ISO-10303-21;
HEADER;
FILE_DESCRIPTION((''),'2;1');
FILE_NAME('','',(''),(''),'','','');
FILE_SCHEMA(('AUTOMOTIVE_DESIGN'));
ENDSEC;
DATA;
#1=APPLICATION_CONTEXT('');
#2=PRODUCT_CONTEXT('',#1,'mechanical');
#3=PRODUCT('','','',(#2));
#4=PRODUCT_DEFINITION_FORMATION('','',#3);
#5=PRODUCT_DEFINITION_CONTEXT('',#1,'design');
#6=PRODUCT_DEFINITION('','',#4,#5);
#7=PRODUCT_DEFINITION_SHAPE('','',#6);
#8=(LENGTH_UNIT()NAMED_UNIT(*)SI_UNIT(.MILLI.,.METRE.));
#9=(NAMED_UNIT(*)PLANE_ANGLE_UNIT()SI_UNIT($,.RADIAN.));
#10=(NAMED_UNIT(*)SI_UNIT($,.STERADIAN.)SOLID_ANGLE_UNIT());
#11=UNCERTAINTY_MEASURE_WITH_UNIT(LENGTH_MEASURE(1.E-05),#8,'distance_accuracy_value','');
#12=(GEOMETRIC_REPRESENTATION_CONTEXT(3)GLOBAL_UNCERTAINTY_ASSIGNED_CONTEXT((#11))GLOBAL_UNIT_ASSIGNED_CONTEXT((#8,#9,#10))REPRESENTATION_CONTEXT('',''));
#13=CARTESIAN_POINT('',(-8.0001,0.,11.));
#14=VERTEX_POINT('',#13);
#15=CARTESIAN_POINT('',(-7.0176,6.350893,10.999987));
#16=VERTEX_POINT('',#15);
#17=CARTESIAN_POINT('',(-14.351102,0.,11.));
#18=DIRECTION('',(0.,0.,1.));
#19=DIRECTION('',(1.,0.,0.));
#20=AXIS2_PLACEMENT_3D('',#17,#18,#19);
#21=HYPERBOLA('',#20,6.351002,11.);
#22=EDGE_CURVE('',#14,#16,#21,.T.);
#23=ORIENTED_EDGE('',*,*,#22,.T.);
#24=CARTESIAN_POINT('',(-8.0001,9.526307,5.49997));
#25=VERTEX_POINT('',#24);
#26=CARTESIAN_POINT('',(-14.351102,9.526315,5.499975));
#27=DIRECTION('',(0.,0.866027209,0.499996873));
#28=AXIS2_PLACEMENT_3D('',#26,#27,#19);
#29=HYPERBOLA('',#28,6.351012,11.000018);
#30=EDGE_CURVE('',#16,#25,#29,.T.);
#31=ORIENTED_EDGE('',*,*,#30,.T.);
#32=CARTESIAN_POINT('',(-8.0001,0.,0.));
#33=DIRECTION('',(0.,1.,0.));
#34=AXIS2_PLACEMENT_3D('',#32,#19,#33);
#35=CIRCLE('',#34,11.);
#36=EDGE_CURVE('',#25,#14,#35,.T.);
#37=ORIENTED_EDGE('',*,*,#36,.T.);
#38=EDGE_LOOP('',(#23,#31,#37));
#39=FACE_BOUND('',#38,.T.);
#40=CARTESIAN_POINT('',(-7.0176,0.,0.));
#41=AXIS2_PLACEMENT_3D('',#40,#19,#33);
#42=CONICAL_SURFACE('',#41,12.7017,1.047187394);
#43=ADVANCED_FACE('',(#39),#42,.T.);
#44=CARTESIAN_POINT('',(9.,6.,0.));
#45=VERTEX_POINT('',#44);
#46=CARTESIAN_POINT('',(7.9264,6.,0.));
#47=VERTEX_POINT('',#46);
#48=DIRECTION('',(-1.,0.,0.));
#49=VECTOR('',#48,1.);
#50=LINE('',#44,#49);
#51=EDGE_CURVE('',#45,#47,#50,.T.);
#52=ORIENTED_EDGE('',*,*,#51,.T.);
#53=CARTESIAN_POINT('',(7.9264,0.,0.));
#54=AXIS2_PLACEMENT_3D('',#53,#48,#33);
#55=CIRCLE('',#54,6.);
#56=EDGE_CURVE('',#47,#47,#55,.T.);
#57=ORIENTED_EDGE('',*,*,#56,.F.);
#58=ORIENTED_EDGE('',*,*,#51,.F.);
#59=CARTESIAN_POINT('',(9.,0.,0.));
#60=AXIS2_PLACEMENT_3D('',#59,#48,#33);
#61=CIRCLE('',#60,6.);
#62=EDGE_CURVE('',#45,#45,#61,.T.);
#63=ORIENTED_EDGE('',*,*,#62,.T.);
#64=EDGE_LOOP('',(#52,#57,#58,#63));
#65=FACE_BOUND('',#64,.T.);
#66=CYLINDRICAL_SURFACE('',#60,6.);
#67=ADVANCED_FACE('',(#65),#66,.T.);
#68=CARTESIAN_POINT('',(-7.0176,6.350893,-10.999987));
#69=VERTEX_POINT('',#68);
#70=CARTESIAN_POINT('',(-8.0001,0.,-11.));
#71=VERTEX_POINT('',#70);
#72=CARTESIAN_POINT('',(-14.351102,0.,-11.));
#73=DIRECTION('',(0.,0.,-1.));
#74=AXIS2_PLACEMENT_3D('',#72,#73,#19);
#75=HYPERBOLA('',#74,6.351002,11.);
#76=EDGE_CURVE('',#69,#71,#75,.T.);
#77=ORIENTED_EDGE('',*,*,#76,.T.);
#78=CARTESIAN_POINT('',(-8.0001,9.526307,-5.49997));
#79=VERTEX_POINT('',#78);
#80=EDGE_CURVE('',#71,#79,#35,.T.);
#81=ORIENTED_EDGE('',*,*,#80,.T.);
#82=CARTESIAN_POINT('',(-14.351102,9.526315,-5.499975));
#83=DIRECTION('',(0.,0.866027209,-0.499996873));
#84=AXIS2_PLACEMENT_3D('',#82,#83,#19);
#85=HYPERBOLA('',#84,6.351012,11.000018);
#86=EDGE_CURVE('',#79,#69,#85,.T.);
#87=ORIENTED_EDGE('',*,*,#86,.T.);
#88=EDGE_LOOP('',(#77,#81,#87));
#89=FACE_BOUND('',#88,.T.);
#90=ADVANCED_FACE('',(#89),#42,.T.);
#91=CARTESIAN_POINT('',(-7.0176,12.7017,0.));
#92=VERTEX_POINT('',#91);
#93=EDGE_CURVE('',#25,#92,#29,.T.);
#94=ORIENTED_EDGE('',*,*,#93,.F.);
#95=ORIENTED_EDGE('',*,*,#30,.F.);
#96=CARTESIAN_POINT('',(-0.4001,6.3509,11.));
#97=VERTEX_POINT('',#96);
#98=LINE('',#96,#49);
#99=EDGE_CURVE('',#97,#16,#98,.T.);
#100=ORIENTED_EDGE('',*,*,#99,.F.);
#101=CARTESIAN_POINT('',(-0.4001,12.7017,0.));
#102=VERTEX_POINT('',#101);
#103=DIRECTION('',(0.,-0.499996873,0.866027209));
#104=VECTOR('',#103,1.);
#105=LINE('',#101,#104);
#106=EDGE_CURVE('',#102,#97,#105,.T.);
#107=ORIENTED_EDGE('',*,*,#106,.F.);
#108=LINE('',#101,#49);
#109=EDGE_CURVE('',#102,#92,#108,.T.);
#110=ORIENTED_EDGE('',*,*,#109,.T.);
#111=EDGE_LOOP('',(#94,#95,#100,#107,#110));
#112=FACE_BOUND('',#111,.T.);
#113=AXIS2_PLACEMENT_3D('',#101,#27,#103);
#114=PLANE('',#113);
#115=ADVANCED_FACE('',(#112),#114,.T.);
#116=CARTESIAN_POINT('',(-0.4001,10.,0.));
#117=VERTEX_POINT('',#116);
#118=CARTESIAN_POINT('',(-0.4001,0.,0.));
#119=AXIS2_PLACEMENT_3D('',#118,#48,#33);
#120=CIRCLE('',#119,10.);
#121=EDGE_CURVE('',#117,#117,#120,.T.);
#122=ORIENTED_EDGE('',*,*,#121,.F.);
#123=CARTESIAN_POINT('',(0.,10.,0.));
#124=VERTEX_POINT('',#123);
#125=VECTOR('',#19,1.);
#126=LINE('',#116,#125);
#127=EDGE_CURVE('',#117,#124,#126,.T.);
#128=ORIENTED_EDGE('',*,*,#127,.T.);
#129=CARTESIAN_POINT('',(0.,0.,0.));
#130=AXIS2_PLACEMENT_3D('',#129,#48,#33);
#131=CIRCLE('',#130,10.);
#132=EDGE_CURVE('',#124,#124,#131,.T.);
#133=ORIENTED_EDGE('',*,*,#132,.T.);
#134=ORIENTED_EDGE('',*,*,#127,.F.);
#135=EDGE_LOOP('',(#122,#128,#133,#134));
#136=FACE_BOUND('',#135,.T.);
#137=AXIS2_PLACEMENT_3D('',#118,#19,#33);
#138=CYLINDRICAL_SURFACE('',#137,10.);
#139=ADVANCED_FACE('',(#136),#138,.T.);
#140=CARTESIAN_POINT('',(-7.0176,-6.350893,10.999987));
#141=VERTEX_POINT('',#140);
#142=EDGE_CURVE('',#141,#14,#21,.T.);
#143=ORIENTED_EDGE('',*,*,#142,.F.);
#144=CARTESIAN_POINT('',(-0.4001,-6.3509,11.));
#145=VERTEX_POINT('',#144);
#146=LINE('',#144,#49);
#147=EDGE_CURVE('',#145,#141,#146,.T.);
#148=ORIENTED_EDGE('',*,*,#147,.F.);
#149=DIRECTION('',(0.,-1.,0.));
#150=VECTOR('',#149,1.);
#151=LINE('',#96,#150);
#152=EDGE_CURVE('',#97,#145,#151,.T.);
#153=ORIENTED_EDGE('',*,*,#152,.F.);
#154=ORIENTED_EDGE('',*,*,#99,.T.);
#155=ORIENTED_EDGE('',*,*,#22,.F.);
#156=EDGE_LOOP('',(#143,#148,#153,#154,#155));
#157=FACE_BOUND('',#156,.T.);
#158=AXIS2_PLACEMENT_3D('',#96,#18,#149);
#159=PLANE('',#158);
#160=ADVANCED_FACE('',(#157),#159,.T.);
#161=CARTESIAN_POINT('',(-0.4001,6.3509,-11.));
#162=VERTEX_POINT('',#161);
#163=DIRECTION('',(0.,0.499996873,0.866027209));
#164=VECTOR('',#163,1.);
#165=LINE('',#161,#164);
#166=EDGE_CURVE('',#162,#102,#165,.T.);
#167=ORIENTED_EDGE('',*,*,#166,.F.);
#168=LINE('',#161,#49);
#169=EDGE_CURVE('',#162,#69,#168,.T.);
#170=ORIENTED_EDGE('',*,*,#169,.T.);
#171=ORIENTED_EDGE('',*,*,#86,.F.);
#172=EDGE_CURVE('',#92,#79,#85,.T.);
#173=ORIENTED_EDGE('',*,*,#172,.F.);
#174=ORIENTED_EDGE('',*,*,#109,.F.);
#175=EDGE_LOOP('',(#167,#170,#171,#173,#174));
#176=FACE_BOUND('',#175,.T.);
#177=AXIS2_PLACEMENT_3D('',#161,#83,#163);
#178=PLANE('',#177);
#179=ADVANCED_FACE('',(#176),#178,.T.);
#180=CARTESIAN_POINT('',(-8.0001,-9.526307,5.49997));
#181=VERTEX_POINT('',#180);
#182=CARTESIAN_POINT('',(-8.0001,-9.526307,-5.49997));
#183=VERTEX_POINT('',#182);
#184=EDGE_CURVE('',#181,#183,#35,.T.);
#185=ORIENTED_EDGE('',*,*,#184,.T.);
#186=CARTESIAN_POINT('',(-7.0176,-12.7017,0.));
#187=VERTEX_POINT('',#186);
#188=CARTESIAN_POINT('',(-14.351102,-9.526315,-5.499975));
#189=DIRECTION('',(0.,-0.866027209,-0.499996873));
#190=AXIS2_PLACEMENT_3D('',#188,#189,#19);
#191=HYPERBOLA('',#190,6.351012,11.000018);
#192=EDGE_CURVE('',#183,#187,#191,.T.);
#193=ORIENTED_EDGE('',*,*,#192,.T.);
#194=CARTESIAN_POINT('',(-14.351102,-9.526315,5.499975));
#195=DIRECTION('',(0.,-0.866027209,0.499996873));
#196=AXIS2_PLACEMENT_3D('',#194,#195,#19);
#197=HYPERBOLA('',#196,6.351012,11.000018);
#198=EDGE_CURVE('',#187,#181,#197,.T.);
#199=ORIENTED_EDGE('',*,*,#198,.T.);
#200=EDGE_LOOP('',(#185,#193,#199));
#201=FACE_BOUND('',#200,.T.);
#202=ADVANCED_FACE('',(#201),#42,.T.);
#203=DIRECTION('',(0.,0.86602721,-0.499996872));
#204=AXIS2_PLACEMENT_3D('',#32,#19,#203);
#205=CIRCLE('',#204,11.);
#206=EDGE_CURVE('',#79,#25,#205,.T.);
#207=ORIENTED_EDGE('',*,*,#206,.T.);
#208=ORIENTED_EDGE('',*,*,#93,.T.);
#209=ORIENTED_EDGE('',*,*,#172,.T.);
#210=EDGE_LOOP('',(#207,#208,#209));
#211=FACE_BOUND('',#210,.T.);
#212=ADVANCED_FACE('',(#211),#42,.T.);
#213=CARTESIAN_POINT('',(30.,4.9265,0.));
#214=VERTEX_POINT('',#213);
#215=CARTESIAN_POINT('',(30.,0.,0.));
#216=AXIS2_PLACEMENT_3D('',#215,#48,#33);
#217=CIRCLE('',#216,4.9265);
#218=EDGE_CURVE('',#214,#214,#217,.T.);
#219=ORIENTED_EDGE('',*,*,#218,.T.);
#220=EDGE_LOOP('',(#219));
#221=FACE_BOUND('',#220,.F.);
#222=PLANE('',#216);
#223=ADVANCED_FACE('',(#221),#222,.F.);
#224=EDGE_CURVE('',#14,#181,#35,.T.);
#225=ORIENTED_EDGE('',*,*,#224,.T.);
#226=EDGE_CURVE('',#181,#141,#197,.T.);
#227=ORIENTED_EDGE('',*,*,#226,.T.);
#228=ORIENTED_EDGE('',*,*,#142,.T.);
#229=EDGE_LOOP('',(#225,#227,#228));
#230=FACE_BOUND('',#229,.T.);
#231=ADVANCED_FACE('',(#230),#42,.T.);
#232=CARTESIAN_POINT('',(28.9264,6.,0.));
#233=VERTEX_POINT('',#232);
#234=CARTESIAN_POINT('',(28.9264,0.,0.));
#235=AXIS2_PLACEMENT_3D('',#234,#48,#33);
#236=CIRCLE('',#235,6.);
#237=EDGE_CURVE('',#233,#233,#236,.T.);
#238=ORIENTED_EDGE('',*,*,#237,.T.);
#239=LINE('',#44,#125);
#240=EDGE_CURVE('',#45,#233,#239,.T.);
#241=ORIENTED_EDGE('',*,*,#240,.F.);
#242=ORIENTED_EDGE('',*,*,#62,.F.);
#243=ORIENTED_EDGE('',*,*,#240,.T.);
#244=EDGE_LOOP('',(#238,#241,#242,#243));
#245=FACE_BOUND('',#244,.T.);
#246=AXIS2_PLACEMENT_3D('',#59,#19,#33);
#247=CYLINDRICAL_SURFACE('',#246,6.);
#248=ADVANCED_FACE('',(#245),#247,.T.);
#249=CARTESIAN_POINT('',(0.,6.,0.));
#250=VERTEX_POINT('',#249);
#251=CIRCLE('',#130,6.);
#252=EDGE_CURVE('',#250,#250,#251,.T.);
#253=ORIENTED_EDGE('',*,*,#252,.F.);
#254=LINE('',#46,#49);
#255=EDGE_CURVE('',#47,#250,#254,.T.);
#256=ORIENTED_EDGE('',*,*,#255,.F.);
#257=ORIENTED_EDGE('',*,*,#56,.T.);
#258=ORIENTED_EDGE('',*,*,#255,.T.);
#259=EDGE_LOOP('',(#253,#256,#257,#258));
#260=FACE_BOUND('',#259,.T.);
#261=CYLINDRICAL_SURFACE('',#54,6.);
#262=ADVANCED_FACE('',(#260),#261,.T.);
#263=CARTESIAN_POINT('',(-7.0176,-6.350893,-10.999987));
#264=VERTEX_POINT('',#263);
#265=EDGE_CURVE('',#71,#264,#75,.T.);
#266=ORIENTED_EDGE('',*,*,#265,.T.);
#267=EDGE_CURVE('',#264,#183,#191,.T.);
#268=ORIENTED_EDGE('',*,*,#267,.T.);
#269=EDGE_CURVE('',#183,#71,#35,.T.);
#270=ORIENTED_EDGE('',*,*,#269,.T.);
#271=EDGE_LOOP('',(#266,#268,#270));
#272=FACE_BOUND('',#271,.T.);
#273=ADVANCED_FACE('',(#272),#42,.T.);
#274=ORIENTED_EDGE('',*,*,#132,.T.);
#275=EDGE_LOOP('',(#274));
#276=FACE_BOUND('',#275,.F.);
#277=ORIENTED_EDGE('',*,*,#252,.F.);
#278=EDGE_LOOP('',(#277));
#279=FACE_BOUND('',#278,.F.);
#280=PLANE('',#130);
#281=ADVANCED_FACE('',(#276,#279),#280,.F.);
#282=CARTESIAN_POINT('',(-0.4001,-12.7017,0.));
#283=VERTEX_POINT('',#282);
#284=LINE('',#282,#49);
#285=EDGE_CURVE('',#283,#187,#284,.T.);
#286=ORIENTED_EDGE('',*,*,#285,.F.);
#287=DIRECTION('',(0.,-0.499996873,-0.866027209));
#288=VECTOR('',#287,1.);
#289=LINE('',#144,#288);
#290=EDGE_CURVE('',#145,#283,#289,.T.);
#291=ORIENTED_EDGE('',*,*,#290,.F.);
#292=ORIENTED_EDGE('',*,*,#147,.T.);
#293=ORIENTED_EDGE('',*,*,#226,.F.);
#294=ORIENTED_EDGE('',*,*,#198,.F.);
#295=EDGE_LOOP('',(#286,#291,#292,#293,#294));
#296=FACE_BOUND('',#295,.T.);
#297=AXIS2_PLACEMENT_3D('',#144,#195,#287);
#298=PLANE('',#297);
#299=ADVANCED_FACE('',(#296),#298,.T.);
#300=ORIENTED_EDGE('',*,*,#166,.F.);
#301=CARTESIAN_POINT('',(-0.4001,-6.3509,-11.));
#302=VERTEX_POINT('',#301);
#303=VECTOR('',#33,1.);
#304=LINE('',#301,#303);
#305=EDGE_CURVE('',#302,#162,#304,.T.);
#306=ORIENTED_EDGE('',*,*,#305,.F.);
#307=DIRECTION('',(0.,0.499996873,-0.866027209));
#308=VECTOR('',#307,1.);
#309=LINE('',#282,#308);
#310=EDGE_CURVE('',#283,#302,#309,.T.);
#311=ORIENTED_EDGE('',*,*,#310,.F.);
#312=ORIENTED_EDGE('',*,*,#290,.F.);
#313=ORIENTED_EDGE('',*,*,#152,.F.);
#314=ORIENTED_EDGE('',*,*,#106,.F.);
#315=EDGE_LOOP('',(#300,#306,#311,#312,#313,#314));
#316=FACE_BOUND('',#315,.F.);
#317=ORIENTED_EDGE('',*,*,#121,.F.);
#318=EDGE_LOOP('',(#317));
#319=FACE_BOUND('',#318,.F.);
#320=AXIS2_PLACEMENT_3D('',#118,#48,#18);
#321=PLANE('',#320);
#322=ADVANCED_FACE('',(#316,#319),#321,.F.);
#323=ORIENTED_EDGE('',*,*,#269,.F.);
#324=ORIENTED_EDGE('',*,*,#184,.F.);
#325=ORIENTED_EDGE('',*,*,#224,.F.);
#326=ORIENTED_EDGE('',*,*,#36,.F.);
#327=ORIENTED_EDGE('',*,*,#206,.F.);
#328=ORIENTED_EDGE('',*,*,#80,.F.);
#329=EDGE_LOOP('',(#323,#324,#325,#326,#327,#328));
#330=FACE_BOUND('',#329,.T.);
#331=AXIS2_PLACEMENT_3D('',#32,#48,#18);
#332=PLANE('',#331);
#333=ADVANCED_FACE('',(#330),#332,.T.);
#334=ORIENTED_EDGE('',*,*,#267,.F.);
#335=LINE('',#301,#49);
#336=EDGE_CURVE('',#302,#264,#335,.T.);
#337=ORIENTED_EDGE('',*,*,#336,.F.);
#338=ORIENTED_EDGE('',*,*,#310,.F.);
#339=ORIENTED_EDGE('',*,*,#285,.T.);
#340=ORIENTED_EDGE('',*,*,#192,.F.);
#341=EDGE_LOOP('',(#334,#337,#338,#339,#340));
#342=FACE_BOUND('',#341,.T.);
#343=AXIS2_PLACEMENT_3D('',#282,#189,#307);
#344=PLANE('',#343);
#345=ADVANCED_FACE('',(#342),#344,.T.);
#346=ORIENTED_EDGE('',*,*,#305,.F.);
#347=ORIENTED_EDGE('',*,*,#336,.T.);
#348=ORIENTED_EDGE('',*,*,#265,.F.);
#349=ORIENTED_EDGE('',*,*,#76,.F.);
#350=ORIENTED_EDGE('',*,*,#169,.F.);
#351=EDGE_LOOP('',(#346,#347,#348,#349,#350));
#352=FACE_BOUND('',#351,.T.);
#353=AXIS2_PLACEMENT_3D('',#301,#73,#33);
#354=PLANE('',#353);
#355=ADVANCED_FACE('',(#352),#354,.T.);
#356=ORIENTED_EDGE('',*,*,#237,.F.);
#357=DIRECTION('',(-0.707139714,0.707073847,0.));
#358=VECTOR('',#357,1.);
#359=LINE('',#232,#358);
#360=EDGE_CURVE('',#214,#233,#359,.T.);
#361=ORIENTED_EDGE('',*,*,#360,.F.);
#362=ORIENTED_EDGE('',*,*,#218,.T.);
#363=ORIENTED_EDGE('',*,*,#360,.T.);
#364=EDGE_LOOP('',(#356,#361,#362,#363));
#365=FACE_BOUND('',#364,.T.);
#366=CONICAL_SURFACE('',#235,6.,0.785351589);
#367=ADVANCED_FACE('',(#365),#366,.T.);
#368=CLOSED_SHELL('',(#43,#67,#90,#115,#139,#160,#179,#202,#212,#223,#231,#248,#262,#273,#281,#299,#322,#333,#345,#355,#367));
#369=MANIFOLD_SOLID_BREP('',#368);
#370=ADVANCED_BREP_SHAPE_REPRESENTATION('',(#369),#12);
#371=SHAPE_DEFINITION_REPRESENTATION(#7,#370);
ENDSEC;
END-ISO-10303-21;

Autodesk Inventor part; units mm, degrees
ref_plane "YZ Plane" through (0, 0, 0) normal (1, 0, 0) x (0, 1, 0)
ref_plane "XZ Plane" through (0, 0, 0) normal (0, 1, 0) x (-1, 0, 0)
sketch "Sketch1" plane through (0, 0, 0) normal (0, 0, 1) x (1, 0, 0)
  line L0 (0, 10) -> (0, 6)
  line L1 (9, 6) -> (30, 6)
  line L2 (30, 6) -> (30, 0)
  line L3 (30, 0) -> (-0.4001, 0)
  line L4 (-6.4801, 0) -> (36.08, 0) projected
  line L5 (-0.4001, 0) -> (-0.4001, 10)
  line L6 (-0.4001, 10) -> (0, 10)
  line L7 (9, 6) -> (7.9264, 6)
  line L8 (7.9264, 6) -> (0, 6)
  line L9 (0, -2) -> (0, 12) projected
  dimension "d0" = 30
  dimension "d1" = 21
  dimension "d2" = 12
  dimension "d9" = 0.4001
  dimension "d10" = 20
  dimension "d13" = 1.0736
  dimension "d14" = 12
revolve "Body" add sketch "Sketch1" angle 360 about axis through (30, 0, 0) along (-1, 0, 0)
sketch "Sketch2" plane through (-0.4001, 0, 0) normal (-1, 0, 0) x (0, 0, 1)
  line L0 (0, 12.7017) -> (11, 6.3509)
  line L1 (11, 6.3509) -> (11, -6.3509)
  line L2 (11, -6.3509) -> (0, -12.7017)
  line L3 (0, -12.7017) -> (-11, -6.3509)
  line L4 (-11, -6.3509) -> (-11, 6.3509)
  line L5 (-11, 6.3509) -> (0, 12.7017)
  point P0 (0, 0)
  point P1 (0, 0)
  dimension "d11" = 22
extrude "Head" add sketch "Sketch2" along normal blind 7.6
sketch "Sketch4" plane through (0, 0, 0) normal (0, 0, 1) x (1, 0, 0)
  line L0 (-8.0001, 11) -> (-8.0001, 12.7017)
  line L1 (-8.0001, 12.7017) -> (-7.0176, 12.7017)
  line L2 (-7.0176, 12.7017) -> (-8.0001, 11)
  line L3 (-9.5201, 0) -> (1.1199, 0) projected
  line L4 (-0.4001, 12.7017) -> (-8.0001, 12.7017) projected
  line L5 (-8.0001, 6.3509) -> (-8.0001, 12.7017) projected
  dimension "d5" = 30
  dimension "d19" = 22
revolve "Chamfer1" cut sketch "Sketch4" angle 360 about axis through (-10, 0, 0) along (1, 0, 0)
thread "Thread" size "M12x1.75" class "6g" standard "ISO Metric profile" length 21
chamfer "Chamfer2" distance 1.0735 distance2 1.0736 1 edges at (30, -6, 0) measured on face at (30, -2.3028, 0.7984)
ref_plane "Work Plane1" through (1.525, 0, 0) normal (0, 0, 1) x (1, 0, 0)
equation "\"d0\" = NLG"
equation "\"d1\" = GEL"
equation "\"d2\" = GD"
equation "\"d10\" = SD2"
equation "\"d14\" = BDM"
equation "\"d11\" = SW"
equation "\"d3\" = KOH - SD"
equation "\"d5\" = ANG1"
equation "\"d19\" = SW0"
equation "\"d15\" = GEL"
equation "\"d6\" = -0.5 * SPD + 0.5 * GD"
equation "\"NLG\" = 30"
equation "\"GD\" = NND"
equation "\"BDM\" = NND"
equation "\"KOH\" = 8"
equation "\"GEL\" = 21"
equation "\"SW\" = 22"
equation "\"SW0\" = SW"
equation "\"SPD\" = NND - 1.2269 * PTC"
equation "\"SD2\" = SDH"
equation "\"SD\" = 0.4"
equation "\"ANG1\" = 30deg"
equation "\"GAL\" = 0.61345 * PTC"
equation "\"GUL\" = 0.61345 * PTC"
equation "\"RR\" = 1.2"
equation "\"WFT\" = 0.4"
equation "\"GD1\" = THREADDIA - 1.2269 * PTC"
equation "\"THREADDIA\" = 12"
equation "\"TOA\" = 30deg"
equation "\"FAWI\" = 45deg"
equation "\"PTC\" = 1.75"
equation "\"NND\" = 12"
equation "\"E0\" = 1.155 * SW"
equation "\"K1\" = 5.28"
equation "\"SDH\" = 20"
properties part number "DIN 6914 - M12 x 30" material "Steel, Mild"
